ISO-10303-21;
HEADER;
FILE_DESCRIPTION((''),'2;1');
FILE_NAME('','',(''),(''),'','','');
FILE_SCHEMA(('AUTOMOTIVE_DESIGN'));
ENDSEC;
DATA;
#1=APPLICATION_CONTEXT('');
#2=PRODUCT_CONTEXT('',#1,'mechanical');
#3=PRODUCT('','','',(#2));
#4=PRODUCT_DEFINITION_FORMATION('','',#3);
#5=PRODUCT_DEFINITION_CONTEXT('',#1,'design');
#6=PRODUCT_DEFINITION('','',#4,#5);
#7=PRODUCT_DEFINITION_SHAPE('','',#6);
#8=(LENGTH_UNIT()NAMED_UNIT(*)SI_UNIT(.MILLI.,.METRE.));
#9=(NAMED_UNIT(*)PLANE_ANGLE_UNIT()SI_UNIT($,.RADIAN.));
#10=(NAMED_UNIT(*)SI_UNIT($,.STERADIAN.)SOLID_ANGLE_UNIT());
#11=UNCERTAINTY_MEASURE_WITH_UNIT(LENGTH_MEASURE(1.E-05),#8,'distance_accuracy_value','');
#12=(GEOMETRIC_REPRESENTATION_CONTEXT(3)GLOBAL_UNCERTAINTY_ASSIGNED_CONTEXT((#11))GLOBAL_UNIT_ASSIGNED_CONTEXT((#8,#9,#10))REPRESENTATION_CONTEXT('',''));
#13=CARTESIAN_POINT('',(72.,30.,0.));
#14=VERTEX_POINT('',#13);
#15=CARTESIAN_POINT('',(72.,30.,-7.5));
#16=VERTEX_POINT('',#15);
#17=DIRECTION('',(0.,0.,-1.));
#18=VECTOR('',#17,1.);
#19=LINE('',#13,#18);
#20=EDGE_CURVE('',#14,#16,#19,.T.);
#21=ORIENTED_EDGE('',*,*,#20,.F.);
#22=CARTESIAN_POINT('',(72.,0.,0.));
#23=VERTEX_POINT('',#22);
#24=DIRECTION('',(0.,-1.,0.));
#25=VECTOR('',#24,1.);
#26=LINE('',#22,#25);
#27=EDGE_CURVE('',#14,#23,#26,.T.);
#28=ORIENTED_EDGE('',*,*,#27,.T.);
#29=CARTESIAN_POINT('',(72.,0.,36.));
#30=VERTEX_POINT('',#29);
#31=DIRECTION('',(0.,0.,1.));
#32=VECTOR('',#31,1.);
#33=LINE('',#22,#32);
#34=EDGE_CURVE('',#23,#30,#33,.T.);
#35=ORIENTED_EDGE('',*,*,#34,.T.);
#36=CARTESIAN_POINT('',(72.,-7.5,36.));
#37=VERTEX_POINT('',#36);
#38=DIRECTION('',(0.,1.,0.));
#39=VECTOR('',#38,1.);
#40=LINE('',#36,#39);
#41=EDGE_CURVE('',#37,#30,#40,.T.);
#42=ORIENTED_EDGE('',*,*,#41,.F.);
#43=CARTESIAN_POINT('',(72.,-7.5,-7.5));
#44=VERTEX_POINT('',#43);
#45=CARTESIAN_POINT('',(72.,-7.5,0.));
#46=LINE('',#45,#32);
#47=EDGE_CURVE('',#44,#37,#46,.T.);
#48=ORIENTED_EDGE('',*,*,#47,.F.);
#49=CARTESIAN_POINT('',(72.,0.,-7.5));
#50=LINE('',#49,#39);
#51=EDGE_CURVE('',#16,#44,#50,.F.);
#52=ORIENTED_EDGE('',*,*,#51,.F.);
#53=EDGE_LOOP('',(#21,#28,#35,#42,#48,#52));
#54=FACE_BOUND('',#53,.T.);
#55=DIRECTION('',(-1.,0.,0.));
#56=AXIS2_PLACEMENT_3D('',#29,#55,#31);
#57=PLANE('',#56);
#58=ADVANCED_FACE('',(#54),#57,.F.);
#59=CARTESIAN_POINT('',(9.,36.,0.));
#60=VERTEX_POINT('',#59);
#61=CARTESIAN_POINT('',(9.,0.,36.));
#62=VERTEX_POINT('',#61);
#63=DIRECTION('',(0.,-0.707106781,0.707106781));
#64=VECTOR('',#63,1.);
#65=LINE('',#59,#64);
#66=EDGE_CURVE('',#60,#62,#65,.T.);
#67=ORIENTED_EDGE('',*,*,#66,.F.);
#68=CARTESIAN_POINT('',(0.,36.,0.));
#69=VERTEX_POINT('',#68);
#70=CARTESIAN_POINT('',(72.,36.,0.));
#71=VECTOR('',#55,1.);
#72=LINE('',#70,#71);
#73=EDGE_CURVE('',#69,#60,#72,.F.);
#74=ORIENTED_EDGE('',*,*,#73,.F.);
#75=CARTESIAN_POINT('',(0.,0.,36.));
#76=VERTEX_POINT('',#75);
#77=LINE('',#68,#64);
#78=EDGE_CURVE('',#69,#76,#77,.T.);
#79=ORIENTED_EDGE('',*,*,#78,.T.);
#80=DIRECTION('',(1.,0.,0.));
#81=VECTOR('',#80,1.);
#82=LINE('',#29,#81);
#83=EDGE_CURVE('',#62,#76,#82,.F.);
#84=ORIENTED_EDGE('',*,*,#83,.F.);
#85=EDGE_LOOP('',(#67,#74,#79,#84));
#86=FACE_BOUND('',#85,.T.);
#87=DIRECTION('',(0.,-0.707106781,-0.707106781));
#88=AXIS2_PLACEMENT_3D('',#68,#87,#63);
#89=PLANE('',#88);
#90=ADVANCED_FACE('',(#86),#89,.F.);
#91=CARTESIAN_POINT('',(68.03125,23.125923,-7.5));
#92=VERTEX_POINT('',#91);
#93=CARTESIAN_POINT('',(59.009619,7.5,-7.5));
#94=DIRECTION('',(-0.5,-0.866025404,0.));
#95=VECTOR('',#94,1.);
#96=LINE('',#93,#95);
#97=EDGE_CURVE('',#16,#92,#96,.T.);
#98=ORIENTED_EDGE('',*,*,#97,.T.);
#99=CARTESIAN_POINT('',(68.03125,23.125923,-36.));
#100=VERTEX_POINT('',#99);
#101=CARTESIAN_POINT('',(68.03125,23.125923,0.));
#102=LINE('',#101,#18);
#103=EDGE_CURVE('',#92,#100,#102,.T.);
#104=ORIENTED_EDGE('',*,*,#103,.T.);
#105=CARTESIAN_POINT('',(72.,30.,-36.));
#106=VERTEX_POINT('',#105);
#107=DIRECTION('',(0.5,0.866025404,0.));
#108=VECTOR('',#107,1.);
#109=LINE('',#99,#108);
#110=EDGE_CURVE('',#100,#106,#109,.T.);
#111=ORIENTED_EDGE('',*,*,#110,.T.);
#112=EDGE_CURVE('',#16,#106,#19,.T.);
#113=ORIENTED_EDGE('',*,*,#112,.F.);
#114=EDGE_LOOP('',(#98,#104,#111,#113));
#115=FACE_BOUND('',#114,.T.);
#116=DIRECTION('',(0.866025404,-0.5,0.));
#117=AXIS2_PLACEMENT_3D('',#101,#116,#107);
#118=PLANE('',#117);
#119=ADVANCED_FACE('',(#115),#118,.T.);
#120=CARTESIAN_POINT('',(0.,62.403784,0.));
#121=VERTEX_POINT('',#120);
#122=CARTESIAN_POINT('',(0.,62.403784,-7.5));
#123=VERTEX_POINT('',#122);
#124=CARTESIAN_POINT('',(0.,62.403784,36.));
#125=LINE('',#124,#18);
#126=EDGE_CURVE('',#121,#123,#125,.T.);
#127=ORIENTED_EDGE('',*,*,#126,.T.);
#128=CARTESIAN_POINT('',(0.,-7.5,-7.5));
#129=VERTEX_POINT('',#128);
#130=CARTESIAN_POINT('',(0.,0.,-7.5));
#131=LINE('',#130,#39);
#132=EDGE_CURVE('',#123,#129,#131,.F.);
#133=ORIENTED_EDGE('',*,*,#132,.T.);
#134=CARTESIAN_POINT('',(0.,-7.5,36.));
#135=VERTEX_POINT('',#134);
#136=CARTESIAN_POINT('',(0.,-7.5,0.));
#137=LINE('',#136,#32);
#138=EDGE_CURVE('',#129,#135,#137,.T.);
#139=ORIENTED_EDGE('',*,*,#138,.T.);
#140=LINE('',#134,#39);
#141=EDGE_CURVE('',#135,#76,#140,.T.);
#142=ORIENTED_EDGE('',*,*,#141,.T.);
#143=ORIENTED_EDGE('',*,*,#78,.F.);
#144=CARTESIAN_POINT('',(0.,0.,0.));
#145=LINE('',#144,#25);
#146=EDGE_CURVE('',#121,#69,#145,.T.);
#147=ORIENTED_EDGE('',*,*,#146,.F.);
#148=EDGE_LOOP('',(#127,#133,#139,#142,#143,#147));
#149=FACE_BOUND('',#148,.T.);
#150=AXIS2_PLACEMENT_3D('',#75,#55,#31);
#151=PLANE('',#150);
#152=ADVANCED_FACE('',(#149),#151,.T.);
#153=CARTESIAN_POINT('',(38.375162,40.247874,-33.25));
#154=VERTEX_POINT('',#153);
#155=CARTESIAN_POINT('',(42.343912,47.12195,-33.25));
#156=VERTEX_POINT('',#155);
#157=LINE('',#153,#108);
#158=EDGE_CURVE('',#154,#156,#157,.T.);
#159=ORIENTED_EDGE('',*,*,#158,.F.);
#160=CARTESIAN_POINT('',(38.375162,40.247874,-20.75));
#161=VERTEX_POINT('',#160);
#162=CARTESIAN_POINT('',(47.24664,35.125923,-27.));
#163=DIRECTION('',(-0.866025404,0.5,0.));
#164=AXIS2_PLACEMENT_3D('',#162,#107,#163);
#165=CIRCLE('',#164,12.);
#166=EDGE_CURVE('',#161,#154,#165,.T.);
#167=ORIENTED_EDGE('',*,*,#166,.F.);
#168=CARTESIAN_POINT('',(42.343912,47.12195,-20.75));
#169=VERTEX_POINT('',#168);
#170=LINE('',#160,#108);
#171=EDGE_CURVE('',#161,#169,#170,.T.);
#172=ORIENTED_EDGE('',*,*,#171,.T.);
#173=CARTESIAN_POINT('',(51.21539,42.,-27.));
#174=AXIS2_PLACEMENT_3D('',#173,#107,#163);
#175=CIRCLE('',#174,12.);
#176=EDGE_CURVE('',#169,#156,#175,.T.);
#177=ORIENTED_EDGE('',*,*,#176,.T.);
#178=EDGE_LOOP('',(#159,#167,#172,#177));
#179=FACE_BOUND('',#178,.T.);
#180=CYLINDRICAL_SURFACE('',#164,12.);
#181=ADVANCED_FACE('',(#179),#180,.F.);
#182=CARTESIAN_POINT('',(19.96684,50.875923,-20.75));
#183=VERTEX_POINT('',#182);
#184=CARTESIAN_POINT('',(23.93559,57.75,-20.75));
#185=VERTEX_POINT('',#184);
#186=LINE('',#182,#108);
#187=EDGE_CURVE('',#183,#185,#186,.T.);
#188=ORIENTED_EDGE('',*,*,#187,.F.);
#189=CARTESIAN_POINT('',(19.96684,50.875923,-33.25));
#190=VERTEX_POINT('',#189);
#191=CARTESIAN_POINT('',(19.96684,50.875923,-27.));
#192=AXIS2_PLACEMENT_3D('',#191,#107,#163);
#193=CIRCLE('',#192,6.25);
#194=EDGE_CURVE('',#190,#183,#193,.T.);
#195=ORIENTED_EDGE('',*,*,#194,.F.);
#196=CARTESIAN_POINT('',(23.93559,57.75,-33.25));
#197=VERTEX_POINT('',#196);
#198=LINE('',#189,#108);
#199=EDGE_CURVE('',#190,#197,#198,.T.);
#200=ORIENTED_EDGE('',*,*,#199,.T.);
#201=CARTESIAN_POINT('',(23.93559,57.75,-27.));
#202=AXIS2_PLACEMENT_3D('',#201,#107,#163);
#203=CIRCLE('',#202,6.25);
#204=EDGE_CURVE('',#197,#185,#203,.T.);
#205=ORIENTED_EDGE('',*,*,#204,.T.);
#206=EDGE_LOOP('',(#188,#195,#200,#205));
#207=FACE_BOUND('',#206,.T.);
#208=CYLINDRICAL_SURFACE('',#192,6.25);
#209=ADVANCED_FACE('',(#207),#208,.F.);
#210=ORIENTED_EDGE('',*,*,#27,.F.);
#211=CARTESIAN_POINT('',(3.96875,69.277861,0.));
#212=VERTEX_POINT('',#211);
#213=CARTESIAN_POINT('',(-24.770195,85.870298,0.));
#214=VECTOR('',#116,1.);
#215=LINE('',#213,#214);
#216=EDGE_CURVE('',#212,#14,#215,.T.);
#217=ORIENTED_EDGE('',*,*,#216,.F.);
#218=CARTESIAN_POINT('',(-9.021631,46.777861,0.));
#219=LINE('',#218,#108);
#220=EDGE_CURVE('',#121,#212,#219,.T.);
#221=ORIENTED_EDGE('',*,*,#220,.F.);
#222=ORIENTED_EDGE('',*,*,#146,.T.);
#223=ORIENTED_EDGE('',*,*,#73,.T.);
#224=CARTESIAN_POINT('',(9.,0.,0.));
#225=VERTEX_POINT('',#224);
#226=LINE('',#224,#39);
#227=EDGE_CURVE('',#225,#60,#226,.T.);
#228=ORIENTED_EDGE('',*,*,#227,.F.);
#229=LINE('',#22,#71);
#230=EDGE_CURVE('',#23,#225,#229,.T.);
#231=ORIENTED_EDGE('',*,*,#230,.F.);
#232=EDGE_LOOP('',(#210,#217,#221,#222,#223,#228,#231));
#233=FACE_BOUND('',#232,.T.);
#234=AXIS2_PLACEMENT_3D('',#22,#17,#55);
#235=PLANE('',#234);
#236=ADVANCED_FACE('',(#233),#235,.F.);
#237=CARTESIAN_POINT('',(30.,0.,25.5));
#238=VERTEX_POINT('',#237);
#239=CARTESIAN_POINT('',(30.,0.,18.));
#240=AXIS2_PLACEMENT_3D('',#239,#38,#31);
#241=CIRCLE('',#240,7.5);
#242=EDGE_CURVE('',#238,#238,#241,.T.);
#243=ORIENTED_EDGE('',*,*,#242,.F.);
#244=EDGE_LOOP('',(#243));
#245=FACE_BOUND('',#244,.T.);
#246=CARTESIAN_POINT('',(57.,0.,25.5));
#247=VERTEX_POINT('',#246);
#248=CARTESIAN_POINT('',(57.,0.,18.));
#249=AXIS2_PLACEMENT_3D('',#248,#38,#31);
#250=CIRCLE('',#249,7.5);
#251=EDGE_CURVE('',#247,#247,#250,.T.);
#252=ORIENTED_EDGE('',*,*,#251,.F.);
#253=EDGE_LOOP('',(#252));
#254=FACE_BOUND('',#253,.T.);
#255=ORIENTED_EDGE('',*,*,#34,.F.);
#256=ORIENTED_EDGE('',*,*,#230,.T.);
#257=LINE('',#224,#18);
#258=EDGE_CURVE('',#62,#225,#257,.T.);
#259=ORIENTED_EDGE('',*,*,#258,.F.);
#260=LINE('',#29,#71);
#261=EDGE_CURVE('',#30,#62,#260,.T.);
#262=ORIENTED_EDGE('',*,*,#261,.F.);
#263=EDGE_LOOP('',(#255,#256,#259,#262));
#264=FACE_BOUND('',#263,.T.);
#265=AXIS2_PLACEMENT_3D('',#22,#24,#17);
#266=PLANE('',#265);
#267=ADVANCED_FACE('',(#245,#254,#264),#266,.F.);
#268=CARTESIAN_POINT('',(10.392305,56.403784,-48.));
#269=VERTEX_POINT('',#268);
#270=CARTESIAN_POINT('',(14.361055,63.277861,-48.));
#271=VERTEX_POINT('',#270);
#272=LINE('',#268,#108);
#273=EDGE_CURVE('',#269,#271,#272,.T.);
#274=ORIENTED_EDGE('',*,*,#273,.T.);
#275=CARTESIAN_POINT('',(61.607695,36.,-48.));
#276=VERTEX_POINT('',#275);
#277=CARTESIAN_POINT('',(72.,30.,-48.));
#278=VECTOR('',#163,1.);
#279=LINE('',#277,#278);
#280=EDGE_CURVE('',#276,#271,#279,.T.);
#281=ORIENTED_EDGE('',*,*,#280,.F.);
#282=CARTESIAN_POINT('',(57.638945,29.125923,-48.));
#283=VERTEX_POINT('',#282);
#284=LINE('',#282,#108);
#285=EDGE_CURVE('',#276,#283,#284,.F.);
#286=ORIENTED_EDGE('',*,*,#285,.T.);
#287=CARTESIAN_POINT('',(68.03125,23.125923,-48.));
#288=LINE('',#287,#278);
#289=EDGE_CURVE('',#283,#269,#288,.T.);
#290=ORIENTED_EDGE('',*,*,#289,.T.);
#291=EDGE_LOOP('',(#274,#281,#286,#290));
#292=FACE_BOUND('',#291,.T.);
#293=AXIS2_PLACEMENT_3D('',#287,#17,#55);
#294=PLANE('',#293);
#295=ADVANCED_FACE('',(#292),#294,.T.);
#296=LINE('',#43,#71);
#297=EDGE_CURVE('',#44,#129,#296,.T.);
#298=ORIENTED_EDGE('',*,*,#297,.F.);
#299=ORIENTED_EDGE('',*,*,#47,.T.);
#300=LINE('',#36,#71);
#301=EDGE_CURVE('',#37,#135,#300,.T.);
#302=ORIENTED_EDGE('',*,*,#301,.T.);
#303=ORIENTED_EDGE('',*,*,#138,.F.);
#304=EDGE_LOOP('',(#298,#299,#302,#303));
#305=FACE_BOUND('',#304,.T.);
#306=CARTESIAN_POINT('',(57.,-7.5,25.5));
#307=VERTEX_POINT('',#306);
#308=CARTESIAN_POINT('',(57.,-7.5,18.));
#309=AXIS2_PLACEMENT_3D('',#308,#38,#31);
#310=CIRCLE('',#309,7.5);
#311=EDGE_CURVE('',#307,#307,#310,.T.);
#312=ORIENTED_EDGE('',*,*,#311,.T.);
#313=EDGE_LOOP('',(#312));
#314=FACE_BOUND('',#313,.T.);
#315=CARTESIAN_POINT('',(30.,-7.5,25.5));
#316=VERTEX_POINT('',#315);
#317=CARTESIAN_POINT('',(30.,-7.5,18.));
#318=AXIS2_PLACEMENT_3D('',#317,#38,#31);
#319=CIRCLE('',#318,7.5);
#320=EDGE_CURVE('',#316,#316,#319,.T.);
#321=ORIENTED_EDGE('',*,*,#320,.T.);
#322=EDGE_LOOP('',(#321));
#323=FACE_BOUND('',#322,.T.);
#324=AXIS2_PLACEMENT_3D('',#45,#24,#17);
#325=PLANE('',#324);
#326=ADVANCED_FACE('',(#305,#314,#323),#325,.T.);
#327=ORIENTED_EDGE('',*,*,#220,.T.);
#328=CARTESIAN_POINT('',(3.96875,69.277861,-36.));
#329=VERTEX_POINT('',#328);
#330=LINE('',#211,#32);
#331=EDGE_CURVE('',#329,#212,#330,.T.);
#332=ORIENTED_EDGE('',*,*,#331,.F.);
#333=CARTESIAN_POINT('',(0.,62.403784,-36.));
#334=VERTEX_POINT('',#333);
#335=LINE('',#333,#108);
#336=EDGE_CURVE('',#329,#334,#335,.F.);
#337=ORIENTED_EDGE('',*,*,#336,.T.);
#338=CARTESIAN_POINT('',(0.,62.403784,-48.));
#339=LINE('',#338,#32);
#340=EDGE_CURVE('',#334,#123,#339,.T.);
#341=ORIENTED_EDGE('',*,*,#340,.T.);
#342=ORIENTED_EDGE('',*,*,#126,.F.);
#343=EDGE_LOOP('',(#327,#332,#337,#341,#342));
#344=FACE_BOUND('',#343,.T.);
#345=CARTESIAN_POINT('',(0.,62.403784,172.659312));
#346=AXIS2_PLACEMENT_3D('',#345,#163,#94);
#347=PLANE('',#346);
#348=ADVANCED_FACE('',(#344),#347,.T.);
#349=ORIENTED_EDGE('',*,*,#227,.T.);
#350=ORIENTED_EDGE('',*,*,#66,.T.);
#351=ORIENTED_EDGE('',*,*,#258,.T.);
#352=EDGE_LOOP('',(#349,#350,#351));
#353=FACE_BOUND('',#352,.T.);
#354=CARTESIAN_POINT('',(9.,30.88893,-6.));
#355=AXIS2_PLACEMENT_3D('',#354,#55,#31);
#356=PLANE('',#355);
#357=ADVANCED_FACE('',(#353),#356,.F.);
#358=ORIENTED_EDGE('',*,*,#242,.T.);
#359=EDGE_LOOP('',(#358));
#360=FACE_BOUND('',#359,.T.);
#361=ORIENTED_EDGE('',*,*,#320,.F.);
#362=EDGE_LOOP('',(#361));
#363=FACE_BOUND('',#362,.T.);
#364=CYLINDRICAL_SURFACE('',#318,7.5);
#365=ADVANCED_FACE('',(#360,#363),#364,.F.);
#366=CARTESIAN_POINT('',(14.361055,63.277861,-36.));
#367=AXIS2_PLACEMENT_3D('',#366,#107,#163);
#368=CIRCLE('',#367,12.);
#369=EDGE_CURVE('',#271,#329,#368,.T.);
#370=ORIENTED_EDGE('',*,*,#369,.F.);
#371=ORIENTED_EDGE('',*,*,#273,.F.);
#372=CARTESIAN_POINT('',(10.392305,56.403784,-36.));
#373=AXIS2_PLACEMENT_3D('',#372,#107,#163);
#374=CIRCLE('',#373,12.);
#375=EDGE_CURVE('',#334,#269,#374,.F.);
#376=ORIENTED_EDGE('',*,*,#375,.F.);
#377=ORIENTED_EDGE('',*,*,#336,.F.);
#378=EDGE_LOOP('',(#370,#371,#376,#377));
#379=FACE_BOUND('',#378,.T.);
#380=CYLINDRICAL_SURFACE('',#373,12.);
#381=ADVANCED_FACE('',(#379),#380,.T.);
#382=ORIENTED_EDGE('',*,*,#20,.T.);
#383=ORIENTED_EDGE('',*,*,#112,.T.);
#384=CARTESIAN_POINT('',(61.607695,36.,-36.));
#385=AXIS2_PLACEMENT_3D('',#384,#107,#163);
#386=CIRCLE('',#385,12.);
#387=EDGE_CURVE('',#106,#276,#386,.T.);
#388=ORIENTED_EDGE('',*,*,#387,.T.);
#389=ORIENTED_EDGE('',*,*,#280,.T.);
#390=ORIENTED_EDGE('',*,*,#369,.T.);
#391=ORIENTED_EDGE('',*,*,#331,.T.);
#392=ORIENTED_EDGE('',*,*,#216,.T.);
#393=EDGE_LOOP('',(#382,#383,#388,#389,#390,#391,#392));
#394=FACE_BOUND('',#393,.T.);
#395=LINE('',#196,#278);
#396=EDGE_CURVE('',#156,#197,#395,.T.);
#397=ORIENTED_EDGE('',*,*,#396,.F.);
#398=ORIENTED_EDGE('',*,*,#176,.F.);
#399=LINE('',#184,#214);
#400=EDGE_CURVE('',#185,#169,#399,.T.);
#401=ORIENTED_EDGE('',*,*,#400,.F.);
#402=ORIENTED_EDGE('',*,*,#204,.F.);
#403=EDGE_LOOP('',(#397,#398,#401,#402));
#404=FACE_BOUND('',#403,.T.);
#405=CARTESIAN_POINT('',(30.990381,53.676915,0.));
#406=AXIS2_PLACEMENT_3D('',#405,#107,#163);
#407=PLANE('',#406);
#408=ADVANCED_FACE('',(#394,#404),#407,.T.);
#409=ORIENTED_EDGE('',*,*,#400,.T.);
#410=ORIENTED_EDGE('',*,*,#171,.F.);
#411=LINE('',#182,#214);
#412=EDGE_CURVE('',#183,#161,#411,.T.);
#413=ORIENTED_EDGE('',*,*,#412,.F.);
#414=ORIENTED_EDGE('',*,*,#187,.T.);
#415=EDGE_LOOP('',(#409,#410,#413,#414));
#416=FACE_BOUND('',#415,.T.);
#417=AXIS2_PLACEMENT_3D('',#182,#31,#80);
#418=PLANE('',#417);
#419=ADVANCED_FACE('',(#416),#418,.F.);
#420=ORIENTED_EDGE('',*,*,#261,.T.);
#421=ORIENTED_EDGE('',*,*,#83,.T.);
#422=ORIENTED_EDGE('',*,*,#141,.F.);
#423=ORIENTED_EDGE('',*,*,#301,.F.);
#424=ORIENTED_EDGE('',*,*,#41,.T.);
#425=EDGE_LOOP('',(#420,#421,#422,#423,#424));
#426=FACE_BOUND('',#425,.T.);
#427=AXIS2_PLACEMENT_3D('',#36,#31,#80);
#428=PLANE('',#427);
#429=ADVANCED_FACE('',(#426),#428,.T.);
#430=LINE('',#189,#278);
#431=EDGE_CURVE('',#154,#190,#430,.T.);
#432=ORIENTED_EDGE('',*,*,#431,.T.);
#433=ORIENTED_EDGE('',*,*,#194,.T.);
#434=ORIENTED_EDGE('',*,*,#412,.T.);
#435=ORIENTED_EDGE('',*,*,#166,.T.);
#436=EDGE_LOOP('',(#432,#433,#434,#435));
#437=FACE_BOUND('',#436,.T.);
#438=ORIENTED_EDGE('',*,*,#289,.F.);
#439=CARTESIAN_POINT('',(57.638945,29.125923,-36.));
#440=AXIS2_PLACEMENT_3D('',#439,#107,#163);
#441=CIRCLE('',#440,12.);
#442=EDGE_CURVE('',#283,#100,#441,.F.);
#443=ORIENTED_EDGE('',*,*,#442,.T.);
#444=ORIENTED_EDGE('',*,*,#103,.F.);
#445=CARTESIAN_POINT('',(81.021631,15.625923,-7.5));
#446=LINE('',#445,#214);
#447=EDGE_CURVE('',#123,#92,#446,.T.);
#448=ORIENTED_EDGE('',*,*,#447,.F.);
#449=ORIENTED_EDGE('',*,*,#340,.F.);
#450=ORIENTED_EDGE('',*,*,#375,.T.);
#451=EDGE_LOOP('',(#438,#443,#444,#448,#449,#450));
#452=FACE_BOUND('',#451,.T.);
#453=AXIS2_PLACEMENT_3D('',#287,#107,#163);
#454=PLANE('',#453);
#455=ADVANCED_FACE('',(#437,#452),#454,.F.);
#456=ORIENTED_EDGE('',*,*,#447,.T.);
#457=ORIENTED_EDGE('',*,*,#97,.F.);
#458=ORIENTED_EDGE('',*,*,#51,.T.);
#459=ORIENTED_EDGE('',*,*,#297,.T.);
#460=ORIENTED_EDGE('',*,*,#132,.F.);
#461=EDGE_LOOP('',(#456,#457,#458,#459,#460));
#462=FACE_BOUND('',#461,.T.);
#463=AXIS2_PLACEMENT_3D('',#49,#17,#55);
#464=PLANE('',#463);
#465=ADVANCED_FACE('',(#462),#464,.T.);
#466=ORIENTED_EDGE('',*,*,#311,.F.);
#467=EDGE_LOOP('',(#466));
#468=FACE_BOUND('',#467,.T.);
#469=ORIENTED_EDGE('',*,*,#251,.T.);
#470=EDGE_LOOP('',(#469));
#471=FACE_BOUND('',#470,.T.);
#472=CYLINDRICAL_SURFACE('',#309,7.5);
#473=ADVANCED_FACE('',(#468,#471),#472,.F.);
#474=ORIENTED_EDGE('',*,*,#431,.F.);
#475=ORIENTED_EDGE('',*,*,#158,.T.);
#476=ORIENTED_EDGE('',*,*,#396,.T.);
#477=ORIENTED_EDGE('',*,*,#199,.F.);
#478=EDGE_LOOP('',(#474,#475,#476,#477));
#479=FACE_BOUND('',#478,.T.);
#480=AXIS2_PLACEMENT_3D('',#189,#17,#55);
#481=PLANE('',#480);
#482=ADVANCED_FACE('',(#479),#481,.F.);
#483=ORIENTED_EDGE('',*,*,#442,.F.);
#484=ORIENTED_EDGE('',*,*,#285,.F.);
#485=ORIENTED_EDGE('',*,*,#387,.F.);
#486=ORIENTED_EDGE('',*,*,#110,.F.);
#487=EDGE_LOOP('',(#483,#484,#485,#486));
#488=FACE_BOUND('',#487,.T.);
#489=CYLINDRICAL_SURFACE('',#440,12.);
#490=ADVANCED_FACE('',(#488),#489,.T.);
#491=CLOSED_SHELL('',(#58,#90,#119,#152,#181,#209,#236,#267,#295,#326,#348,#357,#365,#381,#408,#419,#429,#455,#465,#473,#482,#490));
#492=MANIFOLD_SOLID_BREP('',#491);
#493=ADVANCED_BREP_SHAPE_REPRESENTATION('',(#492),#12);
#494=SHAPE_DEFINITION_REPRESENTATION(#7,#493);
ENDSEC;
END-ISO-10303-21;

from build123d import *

# Parameters (mm, degrees)
EXTRUDE_1_DEPTH          = 72
EXTRUDE_START            = -7.5
EXTRUDE_1_2_DEPTH        = 7.5
SKETCH_3_W               = 83.138438763
SKETCH_3_H               = 48
EXTRUDE_2_DEPTH          = 7.9375
CUT_EXTRUDE_3_DEPTH      = 113.294938278
CUT_EXTRUDE_3_DEPTH_BACK = 113.294938278
FILLET_1_R               = 12
RIB_1_REACH              = 112.849
SKETCH_5_WALL_W          = 274.608976958
SKETCH_5_WALL_H          = 9
SKETCH_6_R               = 7.5
CUT_EXTRUDE_4_DEPTH      = 111.848644356


# Read off the part's stored shape, not the designer's step: 伸長1
with BuildPart() as part:
    # 草圖1 → Extrude 1 (new body)
    with BuildSketch(Plane(origin=(0, 0, 0), x_dir=(0, 0, -1), z_dir=(1, 0, 0))):
        Polygon((-36, 0), (0, 0), (0, 30), (7.5, 30), (7.5, -7.5), (-36, -7.5), align=None)
    extrude(amount=EXTRUDE_1_DEPTH)

    # Extrude 1 2 outline → Extrude 1 2 (add)
    with BuildSketch(Plane.XY.offset(EXTRUDE_START)):
        Polygon((72, 30), (0, 71.569219382), (0, 30), align=None)
    extrude(amount=EXTRUDE_1_2_DEPTH)

    # 草圖3 → 伸長2 (add)
    with BuildSketch(Plane(origin=(30.990381057, 53.676914536, 0), x_dir=(0.866025403784438, -0.5000000000000011, 0), z_dir=(0.5000000000000011, 0.8660254037844382, 0))):
        with Locations((5.784609691, 24)):
            Rectangle(SKETCH_3_W, SKETCH_3_H)
        with BuildLine():
            Line((-8.146170928, 33.25), (13.109928448, 33.25))
            ThreePointArc((13.109928448, 33.25), (35.353829072, 27), (13.109928448, 20.75))
            Line((13.109928448, 20.75), (-8.146170928, 20.75))
            ThreePointArc((-8.146170928, 20.75), (-14.396170928, 27), (-8.146170928, 33.25))
        make_face(mode=Mode.SUBTRACT)
    extrude(amount=-EXTRUDE_2_DEPTH)

    # 草圖4 → 伸長3 (cut, two sides: drawn at the far end of the back side and taken through both)
    with BuildSketch(Plane.XY.offset(-CUT_EXTRUDE_3_DEPTH_BACK)):
        Polygon((-110.576347035, -129.120067321), (0, 62.403783858), (8.212239163, 76.627799333), (118.788586198, 268.151650512), (-264.259116161, 489.304344581), (-493.624049393, 92.032626748), align=None)
    extrude(amount=CUT_EXTRUDE_3_DEPTH + CUT_EXTRUDE_3_DEPTH_BACK, mode=Mode.SUBTRACT)

    # 圓角1
    fillet_1_edges = [part.edges().sort_by_distance(p)[0] for p in [
        (70.015625, 26.562961679, -48),
        (1.984375, 65.84082218, -48),
    ]]
    fillet(fillet_1_edges, radius=FILLET_1_R)

    # 草圖5 wall → 肋材1 (add, up to next)
    with BuildSketch(Plane(origin=(0, 18, 18), x_dir=(0, -0.707106781187, 0.707106781187), z_dir=(0, 0.707106781187, 0.707106781187)), mode=Mode.PRIVATE) as rib_1_sk1:
        with Locations((0, 4.5)):
            Rectangle(SKETCH_5_WALL_W, SKETCH_5_WALL_H)
    rib_1_tool1 = extrude(rib_1_sk1.sketch, amount=-RIB_1_REACH, mode=Mode.PRIVATE) - part.part
    add(rib_1_tool1.solids().sort_by_distance((0, 18, 18))[0])

    # 草圖6 → 伸長4 (cut, through all)
    with BuildSketch(Plane(origin=(0, 0, 0), x_dir=(1, 0, 0), z_dir=(0, 1, 0))):
        with Locations(Location((57, -18, 0), (0, 0, 270))):
            Circle(SKETCH_6_R)
        with Locations(Location((30, -18, 0), (0, 0, 270))):
            Circle(SKETCH_6_R)
    extrude(amount=-CUT_EXTRUDE_4_DEPTH, mode=Mode.SUBTRACT)


solid = part.part
